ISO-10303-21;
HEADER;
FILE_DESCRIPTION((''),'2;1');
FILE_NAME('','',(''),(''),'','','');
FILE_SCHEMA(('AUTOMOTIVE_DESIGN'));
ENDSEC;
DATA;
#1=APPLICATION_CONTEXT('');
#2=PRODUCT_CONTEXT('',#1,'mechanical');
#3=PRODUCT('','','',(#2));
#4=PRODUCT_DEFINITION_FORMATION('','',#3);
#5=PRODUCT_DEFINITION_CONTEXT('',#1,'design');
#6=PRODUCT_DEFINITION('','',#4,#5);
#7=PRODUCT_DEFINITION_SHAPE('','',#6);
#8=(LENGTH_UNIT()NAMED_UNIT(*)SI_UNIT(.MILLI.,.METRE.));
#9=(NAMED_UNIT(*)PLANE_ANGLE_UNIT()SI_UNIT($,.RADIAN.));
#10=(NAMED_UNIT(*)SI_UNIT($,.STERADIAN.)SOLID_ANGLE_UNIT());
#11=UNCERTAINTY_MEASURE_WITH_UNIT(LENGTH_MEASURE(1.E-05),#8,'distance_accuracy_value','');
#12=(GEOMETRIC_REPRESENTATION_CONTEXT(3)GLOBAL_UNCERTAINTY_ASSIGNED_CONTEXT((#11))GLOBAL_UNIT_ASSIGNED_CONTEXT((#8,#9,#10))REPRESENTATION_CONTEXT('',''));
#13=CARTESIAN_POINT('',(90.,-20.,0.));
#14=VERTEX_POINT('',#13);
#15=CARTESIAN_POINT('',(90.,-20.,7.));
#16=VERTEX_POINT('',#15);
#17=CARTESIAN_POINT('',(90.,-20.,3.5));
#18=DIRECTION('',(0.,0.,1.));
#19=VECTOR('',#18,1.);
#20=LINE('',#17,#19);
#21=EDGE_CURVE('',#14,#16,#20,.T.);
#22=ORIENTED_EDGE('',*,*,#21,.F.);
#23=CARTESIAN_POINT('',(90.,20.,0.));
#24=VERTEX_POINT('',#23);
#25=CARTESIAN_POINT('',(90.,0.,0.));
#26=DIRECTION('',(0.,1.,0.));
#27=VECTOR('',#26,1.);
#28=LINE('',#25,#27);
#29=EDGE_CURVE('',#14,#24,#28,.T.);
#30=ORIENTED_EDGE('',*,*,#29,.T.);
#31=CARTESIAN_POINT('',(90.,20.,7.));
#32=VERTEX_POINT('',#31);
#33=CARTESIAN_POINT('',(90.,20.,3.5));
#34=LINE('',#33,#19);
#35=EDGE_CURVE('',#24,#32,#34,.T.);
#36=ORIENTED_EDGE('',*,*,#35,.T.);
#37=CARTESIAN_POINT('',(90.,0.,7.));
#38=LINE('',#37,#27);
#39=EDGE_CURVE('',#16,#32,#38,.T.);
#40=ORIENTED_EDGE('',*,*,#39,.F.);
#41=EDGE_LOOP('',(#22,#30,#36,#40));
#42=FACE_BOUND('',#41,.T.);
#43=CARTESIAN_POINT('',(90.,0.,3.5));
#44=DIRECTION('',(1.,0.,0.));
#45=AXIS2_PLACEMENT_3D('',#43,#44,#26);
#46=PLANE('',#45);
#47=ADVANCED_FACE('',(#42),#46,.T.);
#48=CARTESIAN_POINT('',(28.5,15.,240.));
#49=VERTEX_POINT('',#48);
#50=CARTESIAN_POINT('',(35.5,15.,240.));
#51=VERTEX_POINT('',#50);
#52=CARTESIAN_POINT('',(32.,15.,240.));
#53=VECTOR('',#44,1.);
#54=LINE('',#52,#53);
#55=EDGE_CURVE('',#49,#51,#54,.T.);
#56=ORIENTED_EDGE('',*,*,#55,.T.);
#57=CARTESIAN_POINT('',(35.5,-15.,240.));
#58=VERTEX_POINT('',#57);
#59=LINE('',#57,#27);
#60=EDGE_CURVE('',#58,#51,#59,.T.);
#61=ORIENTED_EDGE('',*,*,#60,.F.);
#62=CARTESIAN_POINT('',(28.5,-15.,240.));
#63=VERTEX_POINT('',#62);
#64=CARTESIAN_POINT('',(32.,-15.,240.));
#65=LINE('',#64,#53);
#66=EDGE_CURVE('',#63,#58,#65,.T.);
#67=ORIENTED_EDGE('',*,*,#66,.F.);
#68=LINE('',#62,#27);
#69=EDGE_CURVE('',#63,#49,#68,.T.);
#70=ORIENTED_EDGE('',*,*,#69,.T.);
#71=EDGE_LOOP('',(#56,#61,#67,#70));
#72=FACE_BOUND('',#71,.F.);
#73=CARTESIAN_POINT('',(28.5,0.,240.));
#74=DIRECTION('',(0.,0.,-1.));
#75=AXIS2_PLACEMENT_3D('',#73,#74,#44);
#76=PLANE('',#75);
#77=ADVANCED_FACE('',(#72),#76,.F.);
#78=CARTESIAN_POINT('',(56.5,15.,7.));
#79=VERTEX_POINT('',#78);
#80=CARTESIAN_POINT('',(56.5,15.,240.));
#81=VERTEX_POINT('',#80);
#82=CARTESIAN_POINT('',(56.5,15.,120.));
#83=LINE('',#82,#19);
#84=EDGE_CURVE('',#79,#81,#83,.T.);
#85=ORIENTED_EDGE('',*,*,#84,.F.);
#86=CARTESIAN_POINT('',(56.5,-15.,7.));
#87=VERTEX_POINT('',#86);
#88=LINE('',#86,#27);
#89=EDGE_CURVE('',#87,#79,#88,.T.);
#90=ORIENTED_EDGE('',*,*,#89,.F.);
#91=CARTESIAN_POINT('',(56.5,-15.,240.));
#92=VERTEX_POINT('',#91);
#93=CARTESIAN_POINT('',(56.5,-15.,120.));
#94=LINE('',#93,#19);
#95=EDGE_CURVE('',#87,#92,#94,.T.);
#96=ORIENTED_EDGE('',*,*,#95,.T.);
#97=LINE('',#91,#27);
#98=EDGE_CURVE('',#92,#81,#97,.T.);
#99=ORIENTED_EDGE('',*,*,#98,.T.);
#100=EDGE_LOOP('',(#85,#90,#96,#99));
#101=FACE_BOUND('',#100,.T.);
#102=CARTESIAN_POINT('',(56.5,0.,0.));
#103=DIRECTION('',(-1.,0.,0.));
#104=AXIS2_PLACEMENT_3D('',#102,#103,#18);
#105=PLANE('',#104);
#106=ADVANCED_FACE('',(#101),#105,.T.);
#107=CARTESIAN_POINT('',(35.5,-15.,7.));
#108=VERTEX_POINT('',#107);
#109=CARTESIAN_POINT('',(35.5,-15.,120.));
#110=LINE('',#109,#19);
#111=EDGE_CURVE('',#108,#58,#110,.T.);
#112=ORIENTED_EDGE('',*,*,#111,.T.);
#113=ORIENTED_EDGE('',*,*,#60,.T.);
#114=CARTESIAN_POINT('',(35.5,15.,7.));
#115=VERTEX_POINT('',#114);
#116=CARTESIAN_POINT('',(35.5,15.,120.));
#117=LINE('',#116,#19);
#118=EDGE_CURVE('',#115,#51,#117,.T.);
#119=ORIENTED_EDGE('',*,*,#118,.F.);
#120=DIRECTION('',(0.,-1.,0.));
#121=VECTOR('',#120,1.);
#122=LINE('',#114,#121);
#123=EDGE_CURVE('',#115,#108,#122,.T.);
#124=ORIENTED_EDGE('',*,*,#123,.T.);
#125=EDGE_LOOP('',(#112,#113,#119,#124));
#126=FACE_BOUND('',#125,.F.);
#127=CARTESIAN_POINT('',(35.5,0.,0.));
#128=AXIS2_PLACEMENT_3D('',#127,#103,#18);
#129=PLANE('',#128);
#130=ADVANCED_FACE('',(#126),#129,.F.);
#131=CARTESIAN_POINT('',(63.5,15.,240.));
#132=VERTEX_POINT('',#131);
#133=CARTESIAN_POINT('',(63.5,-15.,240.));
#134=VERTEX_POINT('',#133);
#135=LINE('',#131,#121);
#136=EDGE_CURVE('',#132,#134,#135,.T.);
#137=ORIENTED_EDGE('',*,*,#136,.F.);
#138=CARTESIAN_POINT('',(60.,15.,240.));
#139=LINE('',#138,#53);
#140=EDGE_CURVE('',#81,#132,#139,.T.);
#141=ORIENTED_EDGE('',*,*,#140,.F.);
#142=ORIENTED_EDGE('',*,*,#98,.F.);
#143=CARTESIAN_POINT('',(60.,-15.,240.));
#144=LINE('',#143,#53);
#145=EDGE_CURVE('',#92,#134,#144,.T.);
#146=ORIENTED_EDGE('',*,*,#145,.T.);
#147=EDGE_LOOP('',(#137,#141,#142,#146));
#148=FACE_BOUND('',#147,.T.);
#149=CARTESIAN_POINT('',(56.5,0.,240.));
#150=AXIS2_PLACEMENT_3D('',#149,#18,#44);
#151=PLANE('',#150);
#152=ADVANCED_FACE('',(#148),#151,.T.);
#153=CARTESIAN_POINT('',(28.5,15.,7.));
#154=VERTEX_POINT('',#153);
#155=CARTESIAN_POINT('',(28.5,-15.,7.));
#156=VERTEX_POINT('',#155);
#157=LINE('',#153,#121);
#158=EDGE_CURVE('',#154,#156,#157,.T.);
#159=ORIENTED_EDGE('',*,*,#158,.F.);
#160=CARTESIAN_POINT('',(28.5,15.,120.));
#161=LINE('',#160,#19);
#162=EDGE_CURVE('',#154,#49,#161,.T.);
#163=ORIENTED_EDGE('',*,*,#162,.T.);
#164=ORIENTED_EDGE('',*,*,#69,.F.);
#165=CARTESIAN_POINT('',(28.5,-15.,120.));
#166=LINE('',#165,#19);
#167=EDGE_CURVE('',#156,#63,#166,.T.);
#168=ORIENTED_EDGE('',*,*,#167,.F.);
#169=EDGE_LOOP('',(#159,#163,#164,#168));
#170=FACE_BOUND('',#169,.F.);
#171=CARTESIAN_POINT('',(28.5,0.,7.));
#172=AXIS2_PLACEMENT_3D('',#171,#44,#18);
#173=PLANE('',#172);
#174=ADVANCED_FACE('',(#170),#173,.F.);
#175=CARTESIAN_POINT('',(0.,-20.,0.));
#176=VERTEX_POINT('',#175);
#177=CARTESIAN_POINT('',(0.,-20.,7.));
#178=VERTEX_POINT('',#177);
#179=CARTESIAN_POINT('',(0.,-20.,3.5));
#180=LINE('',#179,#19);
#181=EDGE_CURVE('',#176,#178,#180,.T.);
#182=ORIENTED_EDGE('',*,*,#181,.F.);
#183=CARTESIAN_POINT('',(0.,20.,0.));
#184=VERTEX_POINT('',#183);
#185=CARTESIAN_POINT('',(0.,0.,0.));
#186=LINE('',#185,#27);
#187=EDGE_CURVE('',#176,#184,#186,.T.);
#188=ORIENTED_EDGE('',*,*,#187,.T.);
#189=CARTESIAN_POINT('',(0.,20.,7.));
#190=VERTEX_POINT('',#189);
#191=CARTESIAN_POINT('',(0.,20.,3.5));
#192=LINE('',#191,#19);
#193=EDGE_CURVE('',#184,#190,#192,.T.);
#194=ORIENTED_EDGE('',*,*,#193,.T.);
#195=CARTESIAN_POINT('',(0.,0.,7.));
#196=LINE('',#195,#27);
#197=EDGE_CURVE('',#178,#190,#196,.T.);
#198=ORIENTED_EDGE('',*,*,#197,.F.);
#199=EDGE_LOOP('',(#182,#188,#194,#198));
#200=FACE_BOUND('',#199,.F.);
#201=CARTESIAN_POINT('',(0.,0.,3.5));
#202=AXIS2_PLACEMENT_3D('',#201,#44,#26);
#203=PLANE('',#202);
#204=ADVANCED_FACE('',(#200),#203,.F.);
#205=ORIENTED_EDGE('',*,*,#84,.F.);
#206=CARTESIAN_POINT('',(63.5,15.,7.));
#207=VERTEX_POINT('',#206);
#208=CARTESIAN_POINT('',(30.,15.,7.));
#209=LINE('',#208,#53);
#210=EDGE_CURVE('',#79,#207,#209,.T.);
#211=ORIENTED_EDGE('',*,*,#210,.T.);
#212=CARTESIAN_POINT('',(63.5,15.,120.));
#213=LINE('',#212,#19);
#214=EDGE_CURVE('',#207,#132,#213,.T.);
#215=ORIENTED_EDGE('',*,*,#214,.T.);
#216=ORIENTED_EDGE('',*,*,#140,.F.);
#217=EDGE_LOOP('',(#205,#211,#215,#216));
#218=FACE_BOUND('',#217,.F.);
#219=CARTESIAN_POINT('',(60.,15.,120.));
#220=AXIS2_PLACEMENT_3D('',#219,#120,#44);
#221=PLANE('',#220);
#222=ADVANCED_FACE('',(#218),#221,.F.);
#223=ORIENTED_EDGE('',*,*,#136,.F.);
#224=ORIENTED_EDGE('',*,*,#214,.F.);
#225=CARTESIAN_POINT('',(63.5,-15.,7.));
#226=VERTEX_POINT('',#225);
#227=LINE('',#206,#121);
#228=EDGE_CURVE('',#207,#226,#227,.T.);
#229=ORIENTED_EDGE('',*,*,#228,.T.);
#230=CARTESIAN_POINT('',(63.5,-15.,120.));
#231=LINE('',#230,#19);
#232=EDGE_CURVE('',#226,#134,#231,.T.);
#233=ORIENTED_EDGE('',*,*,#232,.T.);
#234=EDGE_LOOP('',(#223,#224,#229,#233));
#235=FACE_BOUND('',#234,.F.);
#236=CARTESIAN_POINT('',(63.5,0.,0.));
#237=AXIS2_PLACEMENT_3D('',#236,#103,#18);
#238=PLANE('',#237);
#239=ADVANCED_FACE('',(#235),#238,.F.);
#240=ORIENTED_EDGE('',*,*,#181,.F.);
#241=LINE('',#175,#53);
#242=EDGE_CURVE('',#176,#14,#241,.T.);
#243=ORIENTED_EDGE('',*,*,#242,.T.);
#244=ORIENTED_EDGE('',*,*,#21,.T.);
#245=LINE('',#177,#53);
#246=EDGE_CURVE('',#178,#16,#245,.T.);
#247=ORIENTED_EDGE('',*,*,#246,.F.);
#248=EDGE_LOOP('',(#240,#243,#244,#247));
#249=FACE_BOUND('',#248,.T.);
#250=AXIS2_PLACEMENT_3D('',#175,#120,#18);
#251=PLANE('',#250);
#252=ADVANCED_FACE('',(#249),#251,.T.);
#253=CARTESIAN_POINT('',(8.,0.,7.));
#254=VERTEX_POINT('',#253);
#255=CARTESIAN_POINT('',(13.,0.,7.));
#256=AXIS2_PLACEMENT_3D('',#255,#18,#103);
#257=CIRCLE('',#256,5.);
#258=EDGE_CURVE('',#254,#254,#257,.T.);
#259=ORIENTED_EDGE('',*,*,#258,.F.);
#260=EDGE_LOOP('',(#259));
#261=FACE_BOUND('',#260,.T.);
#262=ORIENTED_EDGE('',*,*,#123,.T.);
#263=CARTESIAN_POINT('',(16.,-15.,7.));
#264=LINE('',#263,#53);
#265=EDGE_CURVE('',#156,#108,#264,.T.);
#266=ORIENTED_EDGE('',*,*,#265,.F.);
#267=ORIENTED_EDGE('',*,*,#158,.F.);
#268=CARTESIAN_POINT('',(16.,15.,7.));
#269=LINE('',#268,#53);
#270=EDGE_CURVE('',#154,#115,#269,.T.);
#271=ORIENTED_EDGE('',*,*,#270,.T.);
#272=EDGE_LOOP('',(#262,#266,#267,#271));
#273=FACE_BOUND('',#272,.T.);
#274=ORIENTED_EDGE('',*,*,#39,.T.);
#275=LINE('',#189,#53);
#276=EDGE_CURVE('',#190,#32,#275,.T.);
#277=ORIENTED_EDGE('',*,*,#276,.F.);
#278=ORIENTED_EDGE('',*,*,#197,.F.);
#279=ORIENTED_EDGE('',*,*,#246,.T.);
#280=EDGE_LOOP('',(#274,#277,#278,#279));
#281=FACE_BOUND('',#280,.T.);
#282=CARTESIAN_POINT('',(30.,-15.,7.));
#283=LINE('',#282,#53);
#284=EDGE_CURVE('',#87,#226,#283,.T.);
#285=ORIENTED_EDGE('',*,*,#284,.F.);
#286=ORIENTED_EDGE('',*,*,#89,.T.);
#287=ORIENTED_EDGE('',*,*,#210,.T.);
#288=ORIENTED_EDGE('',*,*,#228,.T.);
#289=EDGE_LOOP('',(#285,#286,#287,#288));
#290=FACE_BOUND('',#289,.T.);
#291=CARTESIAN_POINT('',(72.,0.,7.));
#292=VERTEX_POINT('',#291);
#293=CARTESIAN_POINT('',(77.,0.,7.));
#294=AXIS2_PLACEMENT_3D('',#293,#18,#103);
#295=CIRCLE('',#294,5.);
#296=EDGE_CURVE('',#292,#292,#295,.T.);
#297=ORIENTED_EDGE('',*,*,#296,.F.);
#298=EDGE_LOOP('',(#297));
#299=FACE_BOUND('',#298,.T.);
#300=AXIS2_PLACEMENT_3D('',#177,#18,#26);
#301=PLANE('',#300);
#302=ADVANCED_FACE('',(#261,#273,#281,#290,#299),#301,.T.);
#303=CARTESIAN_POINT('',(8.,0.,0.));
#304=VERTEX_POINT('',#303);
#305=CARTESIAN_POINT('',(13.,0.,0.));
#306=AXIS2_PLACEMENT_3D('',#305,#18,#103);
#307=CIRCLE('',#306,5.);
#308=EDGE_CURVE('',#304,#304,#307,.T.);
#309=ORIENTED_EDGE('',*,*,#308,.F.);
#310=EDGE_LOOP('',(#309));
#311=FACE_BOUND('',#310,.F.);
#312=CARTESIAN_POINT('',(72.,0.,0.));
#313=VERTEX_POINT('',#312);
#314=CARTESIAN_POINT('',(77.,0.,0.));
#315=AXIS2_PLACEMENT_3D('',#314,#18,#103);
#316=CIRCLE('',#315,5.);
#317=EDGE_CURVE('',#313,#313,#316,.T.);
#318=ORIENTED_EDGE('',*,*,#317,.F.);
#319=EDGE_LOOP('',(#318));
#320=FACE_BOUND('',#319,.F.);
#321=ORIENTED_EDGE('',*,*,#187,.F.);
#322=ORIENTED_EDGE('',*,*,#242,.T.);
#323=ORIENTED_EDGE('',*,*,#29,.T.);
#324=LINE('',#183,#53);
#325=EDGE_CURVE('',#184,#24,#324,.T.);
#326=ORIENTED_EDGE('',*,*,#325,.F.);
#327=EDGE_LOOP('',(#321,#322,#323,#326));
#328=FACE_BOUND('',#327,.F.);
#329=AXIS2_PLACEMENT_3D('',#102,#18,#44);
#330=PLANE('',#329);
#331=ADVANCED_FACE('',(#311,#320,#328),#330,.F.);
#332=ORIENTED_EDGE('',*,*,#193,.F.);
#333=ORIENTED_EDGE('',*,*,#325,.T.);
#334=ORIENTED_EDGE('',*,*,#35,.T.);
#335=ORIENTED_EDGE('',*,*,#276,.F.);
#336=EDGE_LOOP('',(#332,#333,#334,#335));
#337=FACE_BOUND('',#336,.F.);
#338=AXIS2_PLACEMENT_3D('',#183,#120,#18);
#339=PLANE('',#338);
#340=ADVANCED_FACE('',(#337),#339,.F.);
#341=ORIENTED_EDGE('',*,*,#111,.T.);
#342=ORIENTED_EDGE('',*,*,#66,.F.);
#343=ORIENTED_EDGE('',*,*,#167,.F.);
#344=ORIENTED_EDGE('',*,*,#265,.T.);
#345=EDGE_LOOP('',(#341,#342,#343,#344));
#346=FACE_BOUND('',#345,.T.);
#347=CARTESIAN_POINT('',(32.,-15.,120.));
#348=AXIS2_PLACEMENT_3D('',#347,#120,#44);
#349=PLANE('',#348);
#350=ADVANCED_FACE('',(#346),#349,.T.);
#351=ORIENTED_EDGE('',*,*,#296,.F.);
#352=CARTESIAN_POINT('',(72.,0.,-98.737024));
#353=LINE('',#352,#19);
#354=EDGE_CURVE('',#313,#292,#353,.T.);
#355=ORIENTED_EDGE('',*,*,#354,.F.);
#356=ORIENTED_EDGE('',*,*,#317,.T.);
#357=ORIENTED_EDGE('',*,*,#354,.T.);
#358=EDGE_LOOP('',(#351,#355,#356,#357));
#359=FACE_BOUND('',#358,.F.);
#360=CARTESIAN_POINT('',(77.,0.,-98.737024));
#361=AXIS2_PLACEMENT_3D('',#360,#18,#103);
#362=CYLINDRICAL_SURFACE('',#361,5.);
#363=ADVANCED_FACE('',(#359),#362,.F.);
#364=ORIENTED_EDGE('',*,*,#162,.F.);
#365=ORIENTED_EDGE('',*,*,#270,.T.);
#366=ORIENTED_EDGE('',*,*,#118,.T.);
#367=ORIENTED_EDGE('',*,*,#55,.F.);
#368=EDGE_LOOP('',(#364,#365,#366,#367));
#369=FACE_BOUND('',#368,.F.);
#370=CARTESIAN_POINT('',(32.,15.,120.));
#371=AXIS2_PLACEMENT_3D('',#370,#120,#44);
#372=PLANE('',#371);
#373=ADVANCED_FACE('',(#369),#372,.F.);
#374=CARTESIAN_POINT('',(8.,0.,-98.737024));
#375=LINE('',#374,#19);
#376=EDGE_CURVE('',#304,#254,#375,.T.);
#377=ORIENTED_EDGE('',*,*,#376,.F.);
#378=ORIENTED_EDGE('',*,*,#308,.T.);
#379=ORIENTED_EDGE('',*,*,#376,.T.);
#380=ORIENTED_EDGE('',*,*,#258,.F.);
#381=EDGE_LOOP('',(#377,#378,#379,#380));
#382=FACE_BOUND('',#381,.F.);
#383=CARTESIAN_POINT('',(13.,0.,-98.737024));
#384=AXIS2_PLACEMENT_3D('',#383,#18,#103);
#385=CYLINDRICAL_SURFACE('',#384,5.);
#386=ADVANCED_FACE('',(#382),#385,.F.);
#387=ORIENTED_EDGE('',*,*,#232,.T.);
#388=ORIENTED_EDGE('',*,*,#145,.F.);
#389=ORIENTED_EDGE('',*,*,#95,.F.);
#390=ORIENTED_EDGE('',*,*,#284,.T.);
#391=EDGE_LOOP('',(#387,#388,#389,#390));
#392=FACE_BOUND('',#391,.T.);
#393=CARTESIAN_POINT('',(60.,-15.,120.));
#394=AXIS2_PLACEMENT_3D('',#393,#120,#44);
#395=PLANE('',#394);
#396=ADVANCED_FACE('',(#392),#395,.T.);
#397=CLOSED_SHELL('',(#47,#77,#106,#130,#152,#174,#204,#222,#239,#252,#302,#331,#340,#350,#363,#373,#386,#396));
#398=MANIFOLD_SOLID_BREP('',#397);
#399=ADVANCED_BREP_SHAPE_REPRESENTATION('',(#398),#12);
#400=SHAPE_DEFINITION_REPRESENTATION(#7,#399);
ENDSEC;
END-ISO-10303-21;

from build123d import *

# Parameters (mm, degrees)
F0_W     = 40
F0_H     = 7
F1_DEPTH = 90
F4_D     = 10
F5_W     = 7
F5_H     = 240
F6_DEPTH = 15
F7_DEPTH = 15


# Not quite as in the source:
# - a feature names something its author has since deleted; it is built from what else it names


with BuildPart() as f1:
    # F0 (on Right) → F1 (new body)
    with BuildSketch(Plane.YZ):
        with Locations((0, 3.5)):
            Rectangle(F0_W, F0_H)
    extrude(amount=F1_DEPTH)

    # F4 (through all)
    with Locations(Plane(origin=(0, 0, 0), x_dir=(1, 0, 0), z_dir=(0, 0, -1))):
        with Locations((13, 0), (77, 0)):
            Hole(F4_D / 2)

    # F5 (on Front) → F6 (join)
    with BuildSketch(Plane.XZ):
        with Locations((60, 120)):
            Rectangle(F5_W, F5_H)
        with Locations((32, 120)):
            Rectangle(F5_W, F5_H)
    extrude(amount=F6_DEPTH)

    # F7 (add): faces of the model
    f7_faces = [f1.faces().sort_by_distance(p)[0] for p in [
        (32, 0, 123.5),
        (60, 0, 123.5),
    ]]
    extrude(f7_faces, amount=F7_DEPTH)


solid = f1.part
